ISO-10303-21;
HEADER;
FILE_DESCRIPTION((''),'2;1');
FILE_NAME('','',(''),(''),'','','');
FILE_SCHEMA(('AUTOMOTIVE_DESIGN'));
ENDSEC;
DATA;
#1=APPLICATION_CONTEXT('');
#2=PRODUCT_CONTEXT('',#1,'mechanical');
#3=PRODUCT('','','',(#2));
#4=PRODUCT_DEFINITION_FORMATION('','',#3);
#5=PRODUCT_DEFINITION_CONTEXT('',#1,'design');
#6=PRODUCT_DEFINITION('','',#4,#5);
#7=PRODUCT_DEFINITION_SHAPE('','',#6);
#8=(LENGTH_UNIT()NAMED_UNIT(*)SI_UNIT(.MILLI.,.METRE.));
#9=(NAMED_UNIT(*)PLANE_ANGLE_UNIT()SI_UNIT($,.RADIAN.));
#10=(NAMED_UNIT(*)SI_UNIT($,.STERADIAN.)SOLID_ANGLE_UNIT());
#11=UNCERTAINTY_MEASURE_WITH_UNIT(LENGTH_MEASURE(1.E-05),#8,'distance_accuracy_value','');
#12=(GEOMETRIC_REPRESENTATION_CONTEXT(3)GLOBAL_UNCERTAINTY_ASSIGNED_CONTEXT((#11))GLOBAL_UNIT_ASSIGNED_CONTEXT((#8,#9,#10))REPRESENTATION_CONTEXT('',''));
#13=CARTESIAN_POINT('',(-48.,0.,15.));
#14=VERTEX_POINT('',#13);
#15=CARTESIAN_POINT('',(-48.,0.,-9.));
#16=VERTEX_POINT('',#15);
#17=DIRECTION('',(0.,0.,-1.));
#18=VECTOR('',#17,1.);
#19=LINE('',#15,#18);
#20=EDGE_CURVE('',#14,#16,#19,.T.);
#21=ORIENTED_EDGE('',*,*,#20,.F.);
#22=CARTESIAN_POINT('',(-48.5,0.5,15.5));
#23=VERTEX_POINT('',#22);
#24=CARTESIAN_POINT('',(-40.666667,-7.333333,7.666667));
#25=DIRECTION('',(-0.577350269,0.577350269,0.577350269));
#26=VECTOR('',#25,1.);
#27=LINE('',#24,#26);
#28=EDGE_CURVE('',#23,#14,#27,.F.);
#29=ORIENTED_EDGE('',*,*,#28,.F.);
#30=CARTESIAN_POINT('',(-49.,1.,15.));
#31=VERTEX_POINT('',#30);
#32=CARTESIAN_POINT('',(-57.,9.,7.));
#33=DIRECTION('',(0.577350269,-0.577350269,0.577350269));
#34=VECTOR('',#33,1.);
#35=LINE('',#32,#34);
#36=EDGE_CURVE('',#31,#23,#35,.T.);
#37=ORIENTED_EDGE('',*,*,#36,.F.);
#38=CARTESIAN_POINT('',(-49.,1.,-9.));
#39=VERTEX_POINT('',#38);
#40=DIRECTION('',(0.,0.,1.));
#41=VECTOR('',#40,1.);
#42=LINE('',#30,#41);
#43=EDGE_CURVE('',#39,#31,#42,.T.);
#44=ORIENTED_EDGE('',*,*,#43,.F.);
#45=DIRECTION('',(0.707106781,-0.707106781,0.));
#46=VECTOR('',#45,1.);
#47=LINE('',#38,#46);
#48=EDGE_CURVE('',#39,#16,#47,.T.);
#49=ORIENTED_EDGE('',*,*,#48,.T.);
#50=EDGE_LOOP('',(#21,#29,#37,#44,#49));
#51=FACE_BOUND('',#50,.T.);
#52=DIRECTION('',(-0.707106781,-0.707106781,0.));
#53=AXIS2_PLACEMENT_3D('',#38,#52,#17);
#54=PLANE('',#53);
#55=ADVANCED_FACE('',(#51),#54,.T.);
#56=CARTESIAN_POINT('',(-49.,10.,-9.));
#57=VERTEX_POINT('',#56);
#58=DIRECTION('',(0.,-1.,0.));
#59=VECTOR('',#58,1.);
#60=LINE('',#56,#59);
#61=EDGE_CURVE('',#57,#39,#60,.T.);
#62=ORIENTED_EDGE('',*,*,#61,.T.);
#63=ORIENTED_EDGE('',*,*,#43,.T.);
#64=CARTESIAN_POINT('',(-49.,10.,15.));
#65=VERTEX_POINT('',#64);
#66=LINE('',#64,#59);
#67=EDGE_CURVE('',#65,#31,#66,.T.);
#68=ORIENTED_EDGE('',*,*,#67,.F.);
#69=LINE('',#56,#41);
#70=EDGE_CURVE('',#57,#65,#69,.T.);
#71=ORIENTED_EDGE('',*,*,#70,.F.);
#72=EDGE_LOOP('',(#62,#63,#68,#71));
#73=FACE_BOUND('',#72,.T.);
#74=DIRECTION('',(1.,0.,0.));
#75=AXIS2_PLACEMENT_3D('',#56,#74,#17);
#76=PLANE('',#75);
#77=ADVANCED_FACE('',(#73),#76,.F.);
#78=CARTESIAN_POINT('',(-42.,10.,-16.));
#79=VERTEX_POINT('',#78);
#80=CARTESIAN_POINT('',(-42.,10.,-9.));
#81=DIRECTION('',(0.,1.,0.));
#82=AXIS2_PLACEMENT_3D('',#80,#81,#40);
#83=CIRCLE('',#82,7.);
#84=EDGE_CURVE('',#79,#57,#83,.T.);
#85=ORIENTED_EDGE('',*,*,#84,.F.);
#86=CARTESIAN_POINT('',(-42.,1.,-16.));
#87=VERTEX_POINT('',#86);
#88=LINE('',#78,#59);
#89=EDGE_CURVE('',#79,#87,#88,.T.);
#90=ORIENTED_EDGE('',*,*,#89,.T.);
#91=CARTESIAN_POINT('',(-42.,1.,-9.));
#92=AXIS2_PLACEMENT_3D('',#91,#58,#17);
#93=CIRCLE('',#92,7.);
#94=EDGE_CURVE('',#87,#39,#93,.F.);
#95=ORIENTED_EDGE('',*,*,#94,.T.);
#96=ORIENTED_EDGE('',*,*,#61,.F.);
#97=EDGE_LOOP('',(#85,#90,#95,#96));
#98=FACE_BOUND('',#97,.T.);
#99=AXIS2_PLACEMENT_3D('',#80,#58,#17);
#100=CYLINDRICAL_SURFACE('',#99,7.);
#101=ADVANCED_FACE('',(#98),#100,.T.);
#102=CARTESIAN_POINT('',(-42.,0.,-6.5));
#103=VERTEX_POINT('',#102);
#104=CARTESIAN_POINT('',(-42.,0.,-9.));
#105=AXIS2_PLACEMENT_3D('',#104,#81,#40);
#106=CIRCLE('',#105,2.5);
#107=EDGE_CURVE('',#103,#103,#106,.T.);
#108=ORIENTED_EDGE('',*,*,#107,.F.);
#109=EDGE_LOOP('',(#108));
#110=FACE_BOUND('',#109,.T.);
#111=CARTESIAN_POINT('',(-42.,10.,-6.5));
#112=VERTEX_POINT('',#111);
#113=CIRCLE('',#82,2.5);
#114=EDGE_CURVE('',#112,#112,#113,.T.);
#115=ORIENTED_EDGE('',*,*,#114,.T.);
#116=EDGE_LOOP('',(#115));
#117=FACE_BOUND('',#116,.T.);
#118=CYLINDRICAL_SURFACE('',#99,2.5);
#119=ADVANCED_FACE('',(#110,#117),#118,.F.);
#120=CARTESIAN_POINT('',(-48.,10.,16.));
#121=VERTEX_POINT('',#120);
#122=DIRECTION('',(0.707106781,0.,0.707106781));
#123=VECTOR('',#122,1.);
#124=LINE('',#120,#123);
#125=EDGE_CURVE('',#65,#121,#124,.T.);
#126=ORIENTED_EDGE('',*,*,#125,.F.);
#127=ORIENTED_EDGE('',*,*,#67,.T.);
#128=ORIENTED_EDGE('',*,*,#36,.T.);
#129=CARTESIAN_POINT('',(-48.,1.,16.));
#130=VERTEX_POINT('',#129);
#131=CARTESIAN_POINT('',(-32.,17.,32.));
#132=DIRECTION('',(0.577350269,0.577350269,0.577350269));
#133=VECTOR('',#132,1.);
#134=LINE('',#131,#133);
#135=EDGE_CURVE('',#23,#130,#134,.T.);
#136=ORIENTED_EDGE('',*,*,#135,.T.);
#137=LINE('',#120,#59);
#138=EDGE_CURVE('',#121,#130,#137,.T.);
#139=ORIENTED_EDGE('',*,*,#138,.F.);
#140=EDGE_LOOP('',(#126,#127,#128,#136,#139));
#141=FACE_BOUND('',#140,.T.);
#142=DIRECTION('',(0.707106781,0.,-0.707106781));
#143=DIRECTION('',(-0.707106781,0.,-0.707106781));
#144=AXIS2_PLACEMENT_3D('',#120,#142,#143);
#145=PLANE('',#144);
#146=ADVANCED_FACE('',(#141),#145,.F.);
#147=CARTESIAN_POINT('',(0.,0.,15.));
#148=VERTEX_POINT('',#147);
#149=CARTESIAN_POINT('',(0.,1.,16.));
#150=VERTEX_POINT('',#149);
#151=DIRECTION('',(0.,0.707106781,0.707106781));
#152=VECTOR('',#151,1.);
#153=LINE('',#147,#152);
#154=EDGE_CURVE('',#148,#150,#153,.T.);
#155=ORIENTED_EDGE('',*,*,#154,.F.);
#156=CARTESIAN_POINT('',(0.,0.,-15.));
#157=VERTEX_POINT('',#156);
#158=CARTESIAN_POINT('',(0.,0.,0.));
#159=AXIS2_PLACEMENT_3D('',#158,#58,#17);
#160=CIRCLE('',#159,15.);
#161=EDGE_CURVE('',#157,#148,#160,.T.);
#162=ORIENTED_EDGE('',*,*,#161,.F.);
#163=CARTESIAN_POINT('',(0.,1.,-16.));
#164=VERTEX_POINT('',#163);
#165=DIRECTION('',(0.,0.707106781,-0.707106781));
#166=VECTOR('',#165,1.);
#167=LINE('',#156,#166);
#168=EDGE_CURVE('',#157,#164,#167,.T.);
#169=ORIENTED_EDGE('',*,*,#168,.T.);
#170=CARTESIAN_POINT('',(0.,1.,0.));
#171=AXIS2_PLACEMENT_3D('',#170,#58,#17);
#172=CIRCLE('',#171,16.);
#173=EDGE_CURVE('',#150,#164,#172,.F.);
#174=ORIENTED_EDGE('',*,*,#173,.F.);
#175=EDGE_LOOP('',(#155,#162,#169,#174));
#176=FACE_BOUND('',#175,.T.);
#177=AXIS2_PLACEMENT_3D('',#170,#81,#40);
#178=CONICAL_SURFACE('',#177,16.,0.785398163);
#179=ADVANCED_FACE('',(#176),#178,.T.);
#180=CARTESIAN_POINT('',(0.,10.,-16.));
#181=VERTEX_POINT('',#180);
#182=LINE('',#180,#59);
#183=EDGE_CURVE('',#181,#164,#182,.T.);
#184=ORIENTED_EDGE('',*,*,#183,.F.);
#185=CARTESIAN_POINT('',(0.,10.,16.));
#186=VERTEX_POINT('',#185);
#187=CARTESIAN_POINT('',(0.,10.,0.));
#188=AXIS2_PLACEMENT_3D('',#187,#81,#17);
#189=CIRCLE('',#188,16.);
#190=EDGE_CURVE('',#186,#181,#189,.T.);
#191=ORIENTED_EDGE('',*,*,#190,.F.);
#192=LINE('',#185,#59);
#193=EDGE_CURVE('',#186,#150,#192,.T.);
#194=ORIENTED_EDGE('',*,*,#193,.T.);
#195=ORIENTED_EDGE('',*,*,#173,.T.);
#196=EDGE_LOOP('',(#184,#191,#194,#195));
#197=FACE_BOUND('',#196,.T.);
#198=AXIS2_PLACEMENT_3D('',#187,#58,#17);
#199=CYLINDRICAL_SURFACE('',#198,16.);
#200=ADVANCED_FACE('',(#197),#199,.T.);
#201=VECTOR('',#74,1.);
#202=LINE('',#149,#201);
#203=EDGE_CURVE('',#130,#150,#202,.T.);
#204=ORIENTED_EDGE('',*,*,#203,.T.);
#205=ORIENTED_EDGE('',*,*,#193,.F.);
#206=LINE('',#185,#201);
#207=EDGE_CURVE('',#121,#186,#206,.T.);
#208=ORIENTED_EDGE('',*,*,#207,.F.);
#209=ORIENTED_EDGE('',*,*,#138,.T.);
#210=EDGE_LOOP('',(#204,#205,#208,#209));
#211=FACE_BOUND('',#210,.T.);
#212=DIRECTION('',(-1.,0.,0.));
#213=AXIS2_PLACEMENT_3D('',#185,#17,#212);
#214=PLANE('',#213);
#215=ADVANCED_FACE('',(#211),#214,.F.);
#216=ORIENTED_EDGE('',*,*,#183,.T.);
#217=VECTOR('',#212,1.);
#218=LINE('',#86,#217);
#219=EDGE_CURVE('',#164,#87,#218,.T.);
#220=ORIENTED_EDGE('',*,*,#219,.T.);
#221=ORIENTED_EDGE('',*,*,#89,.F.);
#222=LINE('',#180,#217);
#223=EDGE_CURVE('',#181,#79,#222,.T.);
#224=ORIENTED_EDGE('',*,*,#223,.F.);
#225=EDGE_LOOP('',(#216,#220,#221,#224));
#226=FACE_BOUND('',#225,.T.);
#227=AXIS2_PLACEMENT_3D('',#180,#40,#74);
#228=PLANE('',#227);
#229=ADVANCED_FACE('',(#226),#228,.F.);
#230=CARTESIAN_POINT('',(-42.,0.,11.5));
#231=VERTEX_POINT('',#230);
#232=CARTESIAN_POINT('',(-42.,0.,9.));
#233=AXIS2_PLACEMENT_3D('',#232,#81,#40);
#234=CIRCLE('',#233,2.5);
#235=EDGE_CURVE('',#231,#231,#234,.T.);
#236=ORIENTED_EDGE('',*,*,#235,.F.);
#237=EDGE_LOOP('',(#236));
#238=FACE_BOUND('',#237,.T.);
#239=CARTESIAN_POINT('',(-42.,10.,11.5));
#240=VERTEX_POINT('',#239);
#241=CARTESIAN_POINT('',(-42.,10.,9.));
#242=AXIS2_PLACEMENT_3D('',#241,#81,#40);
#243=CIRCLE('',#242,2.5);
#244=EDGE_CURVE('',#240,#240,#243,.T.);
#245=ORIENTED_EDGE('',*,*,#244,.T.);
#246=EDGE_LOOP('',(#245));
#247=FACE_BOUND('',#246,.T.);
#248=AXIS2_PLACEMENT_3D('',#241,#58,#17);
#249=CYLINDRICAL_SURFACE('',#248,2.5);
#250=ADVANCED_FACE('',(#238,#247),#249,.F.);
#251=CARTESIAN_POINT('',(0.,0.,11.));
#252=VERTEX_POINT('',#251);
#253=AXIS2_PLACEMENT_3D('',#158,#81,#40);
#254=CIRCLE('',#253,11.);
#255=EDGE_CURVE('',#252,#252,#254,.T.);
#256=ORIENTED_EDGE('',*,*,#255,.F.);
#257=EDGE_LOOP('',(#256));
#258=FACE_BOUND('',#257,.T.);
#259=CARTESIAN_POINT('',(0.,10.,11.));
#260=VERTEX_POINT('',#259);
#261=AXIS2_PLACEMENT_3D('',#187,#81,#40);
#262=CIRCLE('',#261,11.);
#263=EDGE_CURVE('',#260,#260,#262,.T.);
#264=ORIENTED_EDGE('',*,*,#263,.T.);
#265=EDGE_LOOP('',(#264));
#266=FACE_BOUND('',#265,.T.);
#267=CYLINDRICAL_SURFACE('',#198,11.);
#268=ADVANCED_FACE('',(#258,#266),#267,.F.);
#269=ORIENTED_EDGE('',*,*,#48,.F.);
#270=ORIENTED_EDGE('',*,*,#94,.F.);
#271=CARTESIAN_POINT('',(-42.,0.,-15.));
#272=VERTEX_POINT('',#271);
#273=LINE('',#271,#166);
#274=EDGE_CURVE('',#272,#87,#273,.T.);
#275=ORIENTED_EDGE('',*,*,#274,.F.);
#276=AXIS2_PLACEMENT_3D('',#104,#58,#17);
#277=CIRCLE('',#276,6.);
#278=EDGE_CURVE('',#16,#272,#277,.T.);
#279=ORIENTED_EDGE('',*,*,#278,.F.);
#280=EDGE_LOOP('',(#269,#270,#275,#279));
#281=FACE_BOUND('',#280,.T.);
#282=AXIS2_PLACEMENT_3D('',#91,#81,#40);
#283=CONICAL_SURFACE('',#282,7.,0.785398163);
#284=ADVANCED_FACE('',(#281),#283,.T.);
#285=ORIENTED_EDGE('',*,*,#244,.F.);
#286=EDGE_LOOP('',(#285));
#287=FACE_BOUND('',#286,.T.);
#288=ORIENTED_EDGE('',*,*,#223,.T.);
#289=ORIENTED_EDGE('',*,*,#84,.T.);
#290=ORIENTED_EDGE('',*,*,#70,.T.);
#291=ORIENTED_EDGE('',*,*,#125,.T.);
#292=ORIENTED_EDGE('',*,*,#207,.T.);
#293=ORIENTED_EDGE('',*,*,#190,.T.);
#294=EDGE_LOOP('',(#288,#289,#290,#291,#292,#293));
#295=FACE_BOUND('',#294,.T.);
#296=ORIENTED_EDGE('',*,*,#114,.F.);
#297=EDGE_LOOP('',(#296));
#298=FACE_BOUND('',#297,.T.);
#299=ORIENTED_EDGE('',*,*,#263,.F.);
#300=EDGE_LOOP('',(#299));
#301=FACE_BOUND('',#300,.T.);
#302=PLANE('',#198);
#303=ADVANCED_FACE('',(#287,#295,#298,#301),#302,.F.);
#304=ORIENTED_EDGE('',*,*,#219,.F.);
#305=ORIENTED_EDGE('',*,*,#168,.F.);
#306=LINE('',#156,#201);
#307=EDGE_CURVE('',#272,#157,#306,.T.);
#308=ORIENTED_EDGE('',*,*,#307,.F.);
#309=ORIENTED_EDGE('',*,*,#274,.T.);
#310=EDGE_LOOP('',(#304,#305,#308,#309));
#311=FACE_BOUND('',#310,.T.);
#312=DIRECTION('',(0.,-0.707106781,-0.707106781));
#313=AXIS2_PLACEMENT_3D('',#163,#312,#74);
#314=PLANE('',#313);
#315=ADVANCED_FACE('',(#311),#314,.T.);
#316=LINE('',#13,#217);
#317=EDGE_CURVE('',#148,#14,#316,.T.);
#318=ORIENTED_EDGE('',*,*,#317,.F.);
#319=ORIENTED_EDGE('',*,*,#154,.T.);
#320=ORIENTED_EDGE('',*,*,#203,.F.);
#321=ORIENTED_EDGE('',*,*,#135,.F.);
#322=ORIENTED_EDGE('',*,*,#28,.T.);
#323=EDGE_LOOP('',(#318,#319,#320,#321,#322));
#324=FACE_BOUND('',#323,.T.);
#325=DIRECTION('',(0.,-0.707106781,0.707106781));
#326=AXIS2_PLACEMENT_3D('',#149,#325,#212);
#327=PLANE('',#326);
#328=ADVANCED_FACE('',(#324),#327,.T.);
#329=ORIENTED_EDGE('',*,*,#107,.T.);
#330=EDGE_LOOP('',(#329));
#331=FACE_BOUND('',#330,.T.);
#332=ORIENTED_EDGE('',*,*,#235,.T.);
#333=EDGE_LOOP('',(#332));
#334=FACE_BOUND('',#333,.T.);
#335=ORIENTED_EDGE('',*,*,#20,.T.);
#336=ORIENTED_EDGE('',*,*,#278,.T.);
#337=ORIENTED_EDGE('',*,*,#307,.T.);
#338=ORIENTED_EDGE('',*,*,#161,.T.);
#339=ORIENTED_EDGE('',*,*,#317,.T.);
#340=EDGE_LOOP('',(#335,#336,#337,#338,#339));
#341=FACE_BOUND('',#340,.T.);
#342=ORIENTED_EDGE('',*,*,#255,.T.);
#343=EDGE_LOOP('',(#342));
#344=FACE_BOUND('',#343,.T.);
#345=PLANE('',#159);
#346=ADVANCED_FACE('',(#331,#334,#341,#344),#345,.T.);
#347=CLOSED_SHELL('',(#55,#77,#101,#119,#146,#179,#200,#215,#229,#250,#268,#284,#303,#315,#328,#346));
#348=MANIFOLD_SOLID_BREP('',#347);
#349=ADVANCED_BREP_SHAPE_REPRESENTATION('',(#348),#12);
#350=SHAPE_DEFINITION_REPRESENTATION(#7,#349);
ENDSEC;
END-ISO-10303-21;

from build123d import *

# Parameters (mm, degrees)
SKETCH_1_R      = 11
SKETCH_1_R_2    = 2.5
EXTRUDE_1_DEPTH = 10
CHAMFER_1_SIZE  = 1


with BuildPart() as part:
    # 草图1 → 凸台-拉伸1 (new body)
    with BuildSketch(Plane(origin=(0, 0, 0), x_dir=(1, 0, 0), z_dir=(0, 1, 0))):
        with BuildLine():
            Line((0, 16), (-42, 16))
            ThreePointArc((-42, 16), (-46.949747468, 13.949747468), (-49, 9))
            Line((-49, 9), (-49, -15))
            Line((-49, -15), (-48, -16))
            Line((-48, -16), (0, -16))
            ThreePointArc((0, -16), (16, 0), (0, 16))
        make_face()
        with Locations(Location((0, 0, 0), (0, 0, 270))):
            Circle(SKETCH_1_R, mode=Mode.SUBTRACT)
        with Locations(Location((-42, 9, 0), (0, 0, 270))):
            Circle(SKETCH_1_R_2, mode=Mode.SUBTRACT)
        with Locations(Location((-42, -9, 0), (0, 0, 270))):
            Circle(SKETCH_1_R_2, mode=Mode.SUBTRACT)
    extrude(amount=EXTRUDE_1_DEPTH)

    # 倒角1
    # the kernel refuses this chamfer: 1 mm, written as the material it takes off along each edge
    with BuildSketch(Plane(origin=(-50.571682988, 0, 16), x_dir=(0, 0.9996219169112968, 0.02749587661058563), z_dir=(1, 0, 0))) as chamfer_1_piece_1:
        Polygon((CHAMFER_1_SIZE * 0.999621916911, -CHAMFER_1_SIZE * 0.0274958766106), (-CHAMFER_1_SIZE * 0.0274958766106, -CHAMFER_1_SIZE * 0.999621916911), (0, 0), align=None)
    extrude(amount=50.571682988, mode=Mode.SUBTRACT)
    with BuildSketch(Plane(origin=(0, 0, 0), x_dir=(0, 0, 1), z_dir=(-1, 0, 0))) as chamfer_1_piece_2:
        Polygon((16, CHAMFER_1_SIZE), (16 - CHAMFER_1_SIZE, 0), (16, 0), align=None)
    revolve(axis=Axis((0, 0, 0), (0, 1, 0)), revolution_arc=180, mode=Mode.SUBTRACT)
    with BuildSketch(Plane(origin=(0, 0, -16), x_dir=(0, 0.9996219169112968, -0.02749587661058563), z_dir=(-1, 0, 0))) as chamfer_1_piece_3:
        Polygon((CHAMFER_1_SIZE * 0.999621916911, -CHAMFER_1_SIZE * 0.0274958766106), (-CHAMFER_1_SIZE * 0.0274958766106, -CHAMFER_1_SIZE * 0.999621916911), (0, 0), align=None)
    extrude(amount=42, mode=Mode.SUBTRACT)
    with BuildSketch(Plane(origin=(-42, 0, -9), x_dir=(0, 0, -1), z_dir=(1, 0, 0))) as chamfer_1_piece_4:
        Polygon((7, CHAMFER_1_SIZE), (7 - CHAMFER_1_SIZE, 0), (7, 0), align=None)
    revolve(axis=Axis((-42, 0, -9), (0, 1, 0)), revolution_arc=90, mode=Mode.SUBTRACT)
    with BuildSketch(Plane(origin=(-49, 0, -9), x_dir=(-0.02749587661058908, 0.9996219169112968, 0), z_dir=(0, 0, 1))) as chamfer_1_piece_5:
        Polygon((CHAMFER_1_SIZE * 0.999621916911, -CHAMFER_1_SIZE * 0.0274958766106), (-CHAMFER_1_SIZE * 0.0274958766106, -CHAMFER_1_SIZE * 0.999621916911), (0, 0), align=None)
    extrude(amount=26.571682988, mode=Mode.SUBTRACT)


solid = part.part
